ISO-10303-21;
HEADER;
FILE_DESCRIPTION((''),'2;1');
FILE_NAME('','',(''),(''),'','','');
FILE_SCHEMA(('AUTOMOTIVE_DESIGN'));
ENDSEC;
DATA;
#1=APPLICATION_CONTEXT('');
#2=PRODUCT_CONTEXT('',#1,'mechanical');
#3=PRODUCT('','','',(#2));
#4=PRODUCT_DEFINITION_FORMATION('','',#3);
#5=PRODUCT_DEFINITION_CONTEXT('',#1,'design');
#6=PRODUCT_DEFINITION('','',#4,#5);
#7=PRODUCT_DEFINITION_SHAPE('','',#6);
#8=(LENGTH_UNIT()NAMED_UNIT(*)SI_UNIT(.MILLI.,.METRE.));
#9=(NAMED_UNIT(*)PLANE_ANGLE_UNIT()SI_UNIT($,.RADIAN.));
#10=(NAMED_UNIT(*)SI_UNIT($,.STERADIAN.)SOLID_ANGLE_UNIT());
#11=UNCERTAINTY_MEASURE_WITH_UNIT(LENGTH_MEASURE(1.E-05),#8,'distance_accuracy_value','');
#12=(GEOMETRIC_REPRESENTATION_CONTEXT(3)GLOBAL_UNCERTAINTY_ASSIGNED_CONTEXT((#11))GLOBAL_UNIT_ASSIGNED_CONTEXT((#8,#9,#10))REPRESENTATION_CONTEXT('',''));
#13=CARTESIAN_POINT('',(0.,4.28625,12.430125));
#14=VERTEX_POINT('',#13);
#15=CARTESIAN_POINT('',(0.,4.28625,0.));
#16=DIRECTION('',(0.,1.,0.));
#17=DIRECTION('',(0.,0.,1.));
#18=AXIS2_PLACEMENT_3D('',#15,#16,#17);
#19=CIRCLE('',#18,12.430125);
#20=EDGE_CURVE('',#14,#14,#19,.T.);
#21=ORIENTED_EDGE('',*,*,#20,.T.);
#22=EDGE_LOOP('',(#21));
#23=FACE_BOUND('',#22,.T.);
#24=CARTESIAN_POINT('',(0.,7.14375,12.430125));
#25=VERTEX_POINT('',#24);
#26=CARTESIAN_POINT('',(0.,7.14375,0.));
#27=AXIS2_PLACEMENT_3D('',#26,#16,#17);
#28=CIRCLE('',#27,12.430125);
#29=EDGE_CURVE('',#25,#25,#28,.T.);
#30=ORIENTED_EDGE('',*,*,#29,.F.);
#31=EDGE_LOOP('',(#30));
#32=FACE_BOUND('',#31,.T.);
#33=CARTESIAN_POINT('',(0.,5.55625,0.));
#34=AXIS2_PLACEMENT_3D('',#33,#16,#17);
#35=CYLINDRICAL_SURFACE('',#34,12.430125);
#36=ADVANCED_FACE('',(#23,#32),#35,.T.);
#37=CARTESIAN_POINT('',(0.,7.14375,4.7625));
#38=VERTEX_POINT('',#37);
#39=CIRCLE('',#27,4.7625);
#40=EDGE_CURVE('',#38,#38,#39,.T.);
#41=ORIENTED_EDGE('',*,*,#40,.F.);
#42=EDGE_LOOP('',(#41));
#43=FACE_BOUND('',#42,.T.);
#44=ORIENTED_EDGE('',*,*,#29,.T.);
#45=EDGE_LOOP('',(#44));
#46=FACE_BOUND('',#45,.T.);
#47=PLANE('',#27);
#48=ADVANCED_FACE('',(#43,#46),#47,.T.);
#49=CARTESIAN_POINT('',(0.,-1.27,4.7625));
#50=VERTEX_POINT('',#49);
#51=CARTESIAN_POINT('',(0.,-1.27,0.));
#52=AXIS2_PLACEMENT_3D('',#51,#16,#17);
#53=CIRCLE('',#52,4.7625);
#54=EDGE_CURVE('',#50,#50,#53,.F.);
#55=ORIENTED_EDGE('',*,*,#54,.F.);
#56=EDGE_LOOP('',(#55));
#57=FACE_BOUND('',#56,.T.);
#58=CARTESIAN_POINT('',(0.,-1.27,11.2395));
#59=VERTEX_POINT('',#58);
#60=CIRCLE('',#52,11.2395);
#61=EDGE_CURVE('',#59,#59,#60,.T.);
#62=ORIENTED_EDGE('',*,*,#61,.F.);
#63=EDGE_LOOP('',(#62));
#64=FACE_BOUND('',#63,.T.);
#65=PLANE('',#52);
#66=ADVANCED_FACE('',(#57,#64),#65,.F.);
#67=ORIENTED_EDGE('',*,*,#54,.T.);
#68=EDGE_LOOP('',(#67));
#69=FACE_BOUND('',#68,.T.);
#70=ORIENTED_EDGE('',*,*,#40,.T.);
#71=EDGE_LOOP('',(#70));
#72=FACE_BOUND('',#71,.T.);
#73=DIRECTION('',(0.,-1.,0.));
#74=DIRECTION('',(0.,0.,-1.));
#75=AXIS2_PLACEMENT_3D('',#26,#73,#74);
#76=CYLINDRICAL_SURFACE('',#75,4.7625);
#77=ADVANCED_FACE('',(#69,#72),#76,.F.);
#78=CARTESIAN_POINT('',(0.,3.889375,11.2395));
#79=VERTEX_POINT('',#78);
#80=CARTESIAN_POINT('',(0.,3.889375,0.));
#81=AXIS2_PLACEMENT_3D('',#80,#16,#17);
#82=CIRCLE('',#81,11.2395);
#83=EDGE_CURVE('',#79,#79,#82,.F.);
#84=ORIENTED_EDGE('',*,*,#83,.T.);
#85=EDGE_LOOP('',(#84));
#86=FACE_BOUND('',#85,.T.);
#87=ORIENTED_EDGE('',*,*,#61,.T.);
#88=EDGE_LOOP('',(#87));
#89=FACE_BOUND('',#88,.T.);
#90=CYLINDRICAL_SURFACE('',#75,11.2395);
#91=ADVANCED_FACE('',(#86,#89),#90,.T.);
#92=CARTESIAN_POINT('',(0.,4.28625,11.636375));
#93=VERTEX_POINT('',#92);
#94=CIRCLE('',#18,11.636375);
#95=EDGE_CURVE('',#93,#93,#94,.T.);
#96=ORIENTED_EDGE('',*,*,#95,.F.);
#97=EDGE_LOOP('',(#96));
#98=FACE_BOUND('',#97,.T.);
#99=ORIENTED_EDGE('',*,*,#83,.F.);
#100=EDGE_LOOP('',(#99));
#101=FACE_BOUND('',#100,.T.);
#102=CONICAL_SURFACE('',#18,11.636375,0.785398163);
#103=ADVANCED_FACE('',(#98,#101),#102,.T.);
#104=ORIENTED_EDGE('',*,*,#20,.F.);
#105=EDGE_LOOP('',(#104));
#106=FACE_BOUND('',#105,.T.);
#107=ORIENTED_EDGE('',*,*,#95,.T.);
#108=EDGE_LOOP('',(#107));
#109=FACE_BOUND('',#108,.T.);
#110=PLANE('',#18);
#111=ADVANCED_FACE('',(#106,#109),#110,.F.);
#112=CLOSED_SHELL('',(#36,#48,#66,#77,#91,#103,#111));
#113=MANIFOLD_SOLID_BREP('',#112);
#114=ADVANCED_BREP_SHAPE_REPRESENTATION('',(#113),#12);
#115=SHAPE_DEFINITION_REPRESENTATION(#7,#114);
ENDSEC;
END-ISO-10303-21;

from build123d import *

# Parameters (mm, degrees)
SKETCH2_R                = 11.1125
BOSS_EXTRUDE1_DEPTH      = 7.14375
SKETCH3_R                = 12.303125
BOSS_EXTRUDE2_DEPTH      = 1.5875
CUT_EXTRUDE2_DEPTH       = 19.808693033
CUT_EXTRUDE2_DEPTH_BACK  = 19.808693033
SKETCH4_R                = 4.7625
MOVE_FACE1_BY            = 1.27
MOVE_FACE1_2_BY          = 1.27
MOVE_START               = -1.27
MOVE_FACE2_OUTLINE_R     = 11.2395
MOVE_FACE2_OUTLINE_R_2   = 11.1125
MOVE_FACE2_DEPTH         = 5.55625
MOVE_START_2             = 4.28625
MOVE_FACE2_2_OUTLINE_R   = 12.430125
MOVE_FACE2_2_OUTLINE_R_2 = 12.303125
MOVE_FACE2_2_DEPTH       = 2.8575
CHAMFER1_SIZE            = 0.396875


# Read off the part's stored shape, not the designer's step: Move Face2
with BuildPart() as part:
    # Sketch2 → Boss-Extrude1 (new body)
    with BuildSketch(Plane(origin=(0, 0, 0), x_dir=(1, 0, 0), z_dir=(0, 1, 0))):
        with Locations(Location((0, 0, 0), (0, 0, 270))):
            Circle(SKETCH2_R)
    extrude(amount=BOSS_EXTRUDE1_DEPTH)

    # Sketch3 → Boss-Extrude2 (add)
    with BuildSketch(Plane(origin=(0, 7.14375, 0), x_dir=(1, 0, 0), z_dir=(0, 1, 0))):
        with Locations(Location((0, 0, 0), (0, 0, 270))):
            Circle(SKETCH3_R)
    extrude(amount=-BOSS_EXTRUDE2_DEPTH)

    # Sketch4 → Cut-Extrude2 (cut, two sides: drawn at the far end of the back side and taken through both)
    with BuildSketch(Plane(origin=(0, 0, 0), x_dir=(1, 0, 0), z_dir=(0, 1, 0)).offset(-CUT_EXTRUDE2_DEPTH_BACK)):
        with Locations(Location((0, 0, 0), (0, 0, 270))):
            Circle(SKETCH4_R)
    extrude(amount=CUT_EXTRUDE2_DEPTH + CUT_EXTRUDE2_DEPTH_BACK, mode=Mode.SUBTRACT)

    # Move Face1: a face moved outward by 1.27
    extrude(part.faces().sort_by_distance((-6.1515625, 5.55625, 9.8425))[0], amount=MOVE_FACE1_BY, dir=(0, -1, 0))

    # Move Face1 2: a face moved outward by 1.27
    extrude(part.faces().sort_by_distance((0, 0, 5.55625))[0], amount=MOVE_FACE1_2_BY, dir=(0, -1, 0))

    # Move Face2 outline → Move Face2 (add)
    with BuildSketch(Plane(origin=(0, 0, 0), x_dir=(1, 0, 0), z_dir=(0, 1, 0)).offset(MOVE_START)):
        Circle(MOVE_FACE2_OUTLINE_R)
        Circle(MOVE_FACE2_OUTLINE_R_2, mode=Mode.SUBTRACT)
    extrude(amount=MOVE_FACE2_DEPTH)

    # Move Face2 2 outline → Move Face2 2 (add)
    with BuildSketch(Plane(origin=(0, 0, 0), x_dir=(1, 0, 0), z_dir=(0, 1, 0)).offset(MOVE_START_2)):
        Circle(MOVE_FACE2_2_OUTLINE_R)
        Circle(MOVE_FACE2_2_OUTLINE_R_2, mode=Mode.SUBTRACT)
    extrude(amount=MOVE_FACE2_2_DEPTH)

    # Chamfer1
    chamfer1_edges = [part.edges().sort_by_distance(p)[0] for p in [
        (-11.2395, 4.28625, 0),
    ]]
    chamfer(chamfer1_edges, length=CHAMFER1_SIZE)


solid = part.part
